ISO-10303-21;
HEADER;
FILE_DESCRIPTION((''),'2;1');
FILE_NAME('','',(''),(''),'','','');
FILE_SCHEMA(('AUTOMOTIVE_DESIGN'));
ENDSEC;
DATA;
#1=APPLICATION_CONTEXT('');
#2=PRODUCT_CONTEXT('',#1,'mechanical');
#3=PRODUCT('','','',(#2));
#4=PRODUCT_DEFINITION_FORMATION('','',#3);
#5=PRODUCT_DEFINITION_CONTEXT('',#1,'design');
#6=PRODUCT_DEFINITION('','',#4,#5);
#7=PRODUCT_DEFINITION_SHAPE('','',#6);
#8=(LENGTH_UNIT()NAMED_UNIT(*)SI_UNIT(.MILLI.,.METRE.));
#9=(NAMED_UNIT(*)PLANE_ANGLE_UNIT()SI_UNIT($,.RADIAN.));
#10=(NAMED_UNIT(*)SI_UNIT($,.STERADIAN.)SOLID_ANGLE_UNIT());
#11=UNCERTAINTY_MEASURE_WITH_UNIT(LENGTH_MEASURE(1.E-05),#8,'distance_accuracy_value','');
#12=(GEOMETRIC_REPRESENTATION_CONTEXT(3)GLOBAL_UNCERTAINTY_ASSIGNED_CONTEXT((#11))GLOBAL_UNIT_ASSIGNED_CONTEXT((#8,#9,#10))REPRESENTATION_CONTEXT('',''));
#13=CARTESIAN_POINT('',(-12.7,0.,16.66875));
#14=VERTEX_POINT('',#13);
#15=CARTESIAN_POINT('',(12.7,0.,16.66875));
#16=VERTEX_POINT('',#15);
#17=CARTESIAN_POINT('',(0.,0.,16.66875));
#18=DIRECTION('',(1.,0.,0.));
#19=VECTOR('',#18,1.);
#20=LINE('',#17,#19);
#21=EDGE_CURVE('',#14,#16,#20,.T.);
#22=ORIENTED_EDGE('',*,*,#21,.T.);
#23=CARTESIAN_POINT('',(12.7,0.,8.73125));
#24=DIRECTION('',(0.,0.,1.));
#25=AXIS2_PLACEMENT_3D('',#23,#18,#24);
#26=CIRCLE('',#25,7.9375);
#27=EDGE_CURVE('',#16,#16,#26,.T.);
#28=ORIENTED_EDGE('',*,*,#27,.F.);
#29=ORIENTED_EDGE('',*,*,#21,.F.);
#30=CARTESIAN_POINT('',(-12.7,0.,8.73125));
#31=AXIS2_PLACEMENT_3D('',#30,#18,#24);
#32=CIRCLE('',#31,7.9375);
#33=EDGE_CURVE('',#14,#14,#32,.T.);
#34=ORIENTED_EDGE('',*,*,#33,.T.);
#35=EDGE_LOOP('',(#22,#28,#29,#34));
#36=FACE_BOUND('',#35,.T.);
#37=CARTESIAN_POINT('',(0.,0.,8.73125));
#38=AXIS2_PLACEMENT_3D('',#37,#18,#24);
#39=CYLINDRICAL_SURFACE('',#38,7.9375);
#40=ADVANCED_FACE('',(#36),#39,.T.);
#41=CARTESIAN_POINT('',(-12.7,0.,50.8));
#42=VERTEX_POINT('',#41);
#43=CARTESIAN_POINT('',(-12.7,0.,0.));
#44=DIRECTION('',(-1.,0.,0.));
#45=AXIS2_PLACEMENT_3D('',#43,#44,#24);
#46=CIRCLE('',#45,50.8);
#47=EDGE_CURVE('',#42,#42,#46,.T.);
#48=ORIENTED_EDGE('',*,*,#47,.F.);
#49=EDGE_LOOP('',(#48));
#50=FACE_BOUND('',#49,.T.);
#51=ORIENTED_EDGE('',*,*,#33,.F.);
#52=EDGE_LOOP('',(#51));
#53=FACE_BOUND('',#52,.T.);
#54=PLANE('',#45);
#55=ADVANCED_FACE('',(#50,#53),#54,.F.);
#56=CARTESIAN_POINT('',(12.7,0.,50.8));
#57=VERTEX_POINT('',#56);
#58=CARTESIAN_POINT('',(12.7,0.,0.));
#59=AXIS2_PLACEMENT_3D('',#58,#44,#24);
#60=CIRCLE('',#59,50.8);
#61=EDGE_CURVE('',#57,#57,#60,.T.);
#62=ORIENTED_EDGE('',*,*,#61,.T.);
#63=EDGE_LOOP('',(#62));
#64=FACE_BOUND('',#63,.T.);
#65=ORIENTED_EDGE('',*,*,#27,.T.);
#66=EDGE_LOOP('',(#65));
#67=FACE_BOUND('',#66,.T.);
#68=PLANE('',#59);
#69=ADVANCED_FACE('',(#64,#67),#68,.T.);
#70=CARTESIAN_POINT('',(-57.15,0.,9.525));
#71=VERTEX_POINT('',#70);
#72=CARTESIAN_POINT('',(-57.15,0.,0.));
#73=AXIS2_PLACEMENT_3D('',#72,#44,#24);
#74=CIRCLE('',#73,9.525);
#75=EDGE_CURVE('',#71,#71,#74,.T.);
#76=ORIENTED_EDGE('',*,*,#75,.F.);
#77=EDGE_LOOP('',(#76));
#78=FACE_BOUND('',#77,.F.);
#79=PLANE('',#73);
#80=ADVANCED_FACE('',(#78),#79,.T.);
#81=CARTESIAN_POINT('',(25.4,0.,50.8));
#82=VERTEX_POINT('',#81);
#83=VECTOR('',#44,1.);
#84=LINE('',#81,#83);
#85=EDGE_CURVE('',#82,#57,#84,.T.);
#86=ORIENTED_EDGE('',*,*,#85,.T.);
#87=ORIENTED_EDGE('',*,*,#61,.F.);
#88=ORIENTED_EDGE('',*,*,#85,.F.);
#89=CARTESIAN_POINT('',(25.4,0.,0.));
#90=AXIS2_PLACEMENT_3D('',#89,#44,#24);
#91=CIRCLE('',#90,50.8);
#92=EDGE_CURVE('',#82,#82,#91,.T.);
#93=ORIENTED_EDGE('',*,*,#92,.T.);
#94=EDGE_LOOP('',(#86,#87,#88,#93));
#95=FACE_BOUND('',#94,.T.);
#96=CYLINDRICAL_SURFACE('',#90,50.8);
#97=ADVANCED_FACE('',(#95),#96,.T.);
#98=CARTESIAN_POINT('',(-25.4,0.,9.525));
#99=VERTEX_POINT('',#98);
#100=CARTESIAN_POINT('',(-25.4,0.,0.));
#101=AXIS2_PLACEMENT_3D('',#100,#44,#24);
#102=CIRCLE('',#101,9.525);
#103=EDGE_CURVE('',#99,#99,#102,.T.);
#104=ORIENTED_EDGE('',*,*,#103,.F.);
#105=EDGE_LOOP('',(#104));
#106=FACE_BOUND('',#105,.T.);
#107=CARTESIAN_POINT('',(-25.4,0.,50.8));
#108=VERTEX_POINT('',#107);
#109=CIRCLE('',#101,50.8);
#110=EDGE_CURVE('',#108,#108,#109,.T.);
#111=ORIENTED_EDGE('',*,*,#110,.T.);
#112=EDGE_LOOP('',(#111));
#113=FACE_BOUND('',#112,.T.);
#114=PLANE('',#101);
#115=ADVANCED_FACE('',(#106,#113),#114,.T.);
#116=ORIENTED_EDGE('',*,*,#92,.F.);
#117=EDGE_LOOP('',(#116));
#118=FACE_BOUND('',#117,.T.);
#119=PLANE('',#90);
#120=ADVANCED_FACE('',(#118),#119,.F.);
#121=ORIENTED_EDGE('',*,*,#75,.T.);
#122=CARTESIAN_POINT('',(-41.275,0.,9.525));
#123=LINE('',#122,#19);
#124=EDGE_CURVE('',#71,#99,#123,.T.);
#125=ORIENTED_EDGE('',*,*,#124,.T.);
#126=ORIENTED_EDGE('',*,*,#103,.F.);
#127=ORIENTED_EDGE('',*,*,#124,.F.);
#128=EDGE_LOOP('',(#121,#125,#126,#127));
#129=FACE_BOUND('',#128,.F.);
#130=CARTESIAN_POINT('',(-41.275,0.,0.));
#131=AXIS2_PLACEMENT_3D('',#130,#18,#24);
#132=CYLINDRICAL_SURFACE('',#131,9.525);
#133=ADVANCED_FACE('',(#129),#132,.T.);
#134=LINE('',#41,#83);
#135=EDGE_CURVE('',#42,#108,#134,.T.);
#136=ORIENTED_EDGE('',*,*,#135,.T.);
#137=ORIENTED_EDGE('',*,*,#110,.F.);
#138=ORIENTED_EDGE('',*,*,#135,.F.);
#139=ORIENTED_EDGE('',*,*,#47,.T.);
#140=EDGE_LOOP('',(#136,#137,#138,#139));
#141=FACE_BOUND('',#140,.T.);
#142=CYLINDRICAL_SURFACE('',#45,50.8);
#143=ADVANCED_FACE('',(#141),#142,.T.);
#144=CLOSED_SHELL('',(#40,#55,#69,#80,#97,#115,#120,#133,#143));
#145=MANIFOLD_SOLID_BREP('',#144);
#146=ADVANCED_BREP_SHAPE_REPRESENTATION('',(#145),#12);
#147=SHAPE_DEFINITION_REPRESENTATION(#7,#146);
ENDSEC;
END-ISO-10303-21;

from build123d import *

# Parameters (mm, degrees)
F0_W = 31.75
F0_H = 9.525
F2_W = 25.4
F2_H = 7.9375


# Not quite as in the source:
# - a feature names something its author has since deleted; it is built from what else it names


with BuildPart() as f1:
    # F0 (on Front) → F1 (revolve)
    with BuildSketch(Plane.XZ):
        with Locations((-41.275, 4.7625)):
            Rectangle(F0_W, F0_H)
        Polygon((-25.4, 9.525), (-25.4, 0), (-12.7, 0), (-12.7, 38.89375), (-12.7, 46.83125), (-12.7, 50.8), (-25.4, 50.8), align=None)
    revolve(axis=Axis((-41.275, 0, 0), (-1, 0, 0)))



with BuildPart() as f1b:
    # F0 (on Front) → F1, piece 2 (revolve)
    with BuildSketch(Plane.XZ):
        Polygon((12.7, 46.83125), (12.7, 38.89375), (12.7, 0), (25.4, 0), (25.4, 9.525), (25.4, 50.8), (12.7, 50.8), align=None)
    revolve(axis=Axis((-41.275, 0, 0), (-1, 0, 0)))


with BuildPart() as f1_1:
    add(f1.part)

    add(f1b.part)  # F3 merges F1b
    # F2 (on Front) → F3 (revolve)
    with BuildSketch(Plane.XZ):
        with Locations((0, 12.7)):
            Rectangle(F2_W, F2_H)
    revolve(axis=Axis((0, 0, 8.73125), (1, 0, 0)))


solid = f1_1.part
